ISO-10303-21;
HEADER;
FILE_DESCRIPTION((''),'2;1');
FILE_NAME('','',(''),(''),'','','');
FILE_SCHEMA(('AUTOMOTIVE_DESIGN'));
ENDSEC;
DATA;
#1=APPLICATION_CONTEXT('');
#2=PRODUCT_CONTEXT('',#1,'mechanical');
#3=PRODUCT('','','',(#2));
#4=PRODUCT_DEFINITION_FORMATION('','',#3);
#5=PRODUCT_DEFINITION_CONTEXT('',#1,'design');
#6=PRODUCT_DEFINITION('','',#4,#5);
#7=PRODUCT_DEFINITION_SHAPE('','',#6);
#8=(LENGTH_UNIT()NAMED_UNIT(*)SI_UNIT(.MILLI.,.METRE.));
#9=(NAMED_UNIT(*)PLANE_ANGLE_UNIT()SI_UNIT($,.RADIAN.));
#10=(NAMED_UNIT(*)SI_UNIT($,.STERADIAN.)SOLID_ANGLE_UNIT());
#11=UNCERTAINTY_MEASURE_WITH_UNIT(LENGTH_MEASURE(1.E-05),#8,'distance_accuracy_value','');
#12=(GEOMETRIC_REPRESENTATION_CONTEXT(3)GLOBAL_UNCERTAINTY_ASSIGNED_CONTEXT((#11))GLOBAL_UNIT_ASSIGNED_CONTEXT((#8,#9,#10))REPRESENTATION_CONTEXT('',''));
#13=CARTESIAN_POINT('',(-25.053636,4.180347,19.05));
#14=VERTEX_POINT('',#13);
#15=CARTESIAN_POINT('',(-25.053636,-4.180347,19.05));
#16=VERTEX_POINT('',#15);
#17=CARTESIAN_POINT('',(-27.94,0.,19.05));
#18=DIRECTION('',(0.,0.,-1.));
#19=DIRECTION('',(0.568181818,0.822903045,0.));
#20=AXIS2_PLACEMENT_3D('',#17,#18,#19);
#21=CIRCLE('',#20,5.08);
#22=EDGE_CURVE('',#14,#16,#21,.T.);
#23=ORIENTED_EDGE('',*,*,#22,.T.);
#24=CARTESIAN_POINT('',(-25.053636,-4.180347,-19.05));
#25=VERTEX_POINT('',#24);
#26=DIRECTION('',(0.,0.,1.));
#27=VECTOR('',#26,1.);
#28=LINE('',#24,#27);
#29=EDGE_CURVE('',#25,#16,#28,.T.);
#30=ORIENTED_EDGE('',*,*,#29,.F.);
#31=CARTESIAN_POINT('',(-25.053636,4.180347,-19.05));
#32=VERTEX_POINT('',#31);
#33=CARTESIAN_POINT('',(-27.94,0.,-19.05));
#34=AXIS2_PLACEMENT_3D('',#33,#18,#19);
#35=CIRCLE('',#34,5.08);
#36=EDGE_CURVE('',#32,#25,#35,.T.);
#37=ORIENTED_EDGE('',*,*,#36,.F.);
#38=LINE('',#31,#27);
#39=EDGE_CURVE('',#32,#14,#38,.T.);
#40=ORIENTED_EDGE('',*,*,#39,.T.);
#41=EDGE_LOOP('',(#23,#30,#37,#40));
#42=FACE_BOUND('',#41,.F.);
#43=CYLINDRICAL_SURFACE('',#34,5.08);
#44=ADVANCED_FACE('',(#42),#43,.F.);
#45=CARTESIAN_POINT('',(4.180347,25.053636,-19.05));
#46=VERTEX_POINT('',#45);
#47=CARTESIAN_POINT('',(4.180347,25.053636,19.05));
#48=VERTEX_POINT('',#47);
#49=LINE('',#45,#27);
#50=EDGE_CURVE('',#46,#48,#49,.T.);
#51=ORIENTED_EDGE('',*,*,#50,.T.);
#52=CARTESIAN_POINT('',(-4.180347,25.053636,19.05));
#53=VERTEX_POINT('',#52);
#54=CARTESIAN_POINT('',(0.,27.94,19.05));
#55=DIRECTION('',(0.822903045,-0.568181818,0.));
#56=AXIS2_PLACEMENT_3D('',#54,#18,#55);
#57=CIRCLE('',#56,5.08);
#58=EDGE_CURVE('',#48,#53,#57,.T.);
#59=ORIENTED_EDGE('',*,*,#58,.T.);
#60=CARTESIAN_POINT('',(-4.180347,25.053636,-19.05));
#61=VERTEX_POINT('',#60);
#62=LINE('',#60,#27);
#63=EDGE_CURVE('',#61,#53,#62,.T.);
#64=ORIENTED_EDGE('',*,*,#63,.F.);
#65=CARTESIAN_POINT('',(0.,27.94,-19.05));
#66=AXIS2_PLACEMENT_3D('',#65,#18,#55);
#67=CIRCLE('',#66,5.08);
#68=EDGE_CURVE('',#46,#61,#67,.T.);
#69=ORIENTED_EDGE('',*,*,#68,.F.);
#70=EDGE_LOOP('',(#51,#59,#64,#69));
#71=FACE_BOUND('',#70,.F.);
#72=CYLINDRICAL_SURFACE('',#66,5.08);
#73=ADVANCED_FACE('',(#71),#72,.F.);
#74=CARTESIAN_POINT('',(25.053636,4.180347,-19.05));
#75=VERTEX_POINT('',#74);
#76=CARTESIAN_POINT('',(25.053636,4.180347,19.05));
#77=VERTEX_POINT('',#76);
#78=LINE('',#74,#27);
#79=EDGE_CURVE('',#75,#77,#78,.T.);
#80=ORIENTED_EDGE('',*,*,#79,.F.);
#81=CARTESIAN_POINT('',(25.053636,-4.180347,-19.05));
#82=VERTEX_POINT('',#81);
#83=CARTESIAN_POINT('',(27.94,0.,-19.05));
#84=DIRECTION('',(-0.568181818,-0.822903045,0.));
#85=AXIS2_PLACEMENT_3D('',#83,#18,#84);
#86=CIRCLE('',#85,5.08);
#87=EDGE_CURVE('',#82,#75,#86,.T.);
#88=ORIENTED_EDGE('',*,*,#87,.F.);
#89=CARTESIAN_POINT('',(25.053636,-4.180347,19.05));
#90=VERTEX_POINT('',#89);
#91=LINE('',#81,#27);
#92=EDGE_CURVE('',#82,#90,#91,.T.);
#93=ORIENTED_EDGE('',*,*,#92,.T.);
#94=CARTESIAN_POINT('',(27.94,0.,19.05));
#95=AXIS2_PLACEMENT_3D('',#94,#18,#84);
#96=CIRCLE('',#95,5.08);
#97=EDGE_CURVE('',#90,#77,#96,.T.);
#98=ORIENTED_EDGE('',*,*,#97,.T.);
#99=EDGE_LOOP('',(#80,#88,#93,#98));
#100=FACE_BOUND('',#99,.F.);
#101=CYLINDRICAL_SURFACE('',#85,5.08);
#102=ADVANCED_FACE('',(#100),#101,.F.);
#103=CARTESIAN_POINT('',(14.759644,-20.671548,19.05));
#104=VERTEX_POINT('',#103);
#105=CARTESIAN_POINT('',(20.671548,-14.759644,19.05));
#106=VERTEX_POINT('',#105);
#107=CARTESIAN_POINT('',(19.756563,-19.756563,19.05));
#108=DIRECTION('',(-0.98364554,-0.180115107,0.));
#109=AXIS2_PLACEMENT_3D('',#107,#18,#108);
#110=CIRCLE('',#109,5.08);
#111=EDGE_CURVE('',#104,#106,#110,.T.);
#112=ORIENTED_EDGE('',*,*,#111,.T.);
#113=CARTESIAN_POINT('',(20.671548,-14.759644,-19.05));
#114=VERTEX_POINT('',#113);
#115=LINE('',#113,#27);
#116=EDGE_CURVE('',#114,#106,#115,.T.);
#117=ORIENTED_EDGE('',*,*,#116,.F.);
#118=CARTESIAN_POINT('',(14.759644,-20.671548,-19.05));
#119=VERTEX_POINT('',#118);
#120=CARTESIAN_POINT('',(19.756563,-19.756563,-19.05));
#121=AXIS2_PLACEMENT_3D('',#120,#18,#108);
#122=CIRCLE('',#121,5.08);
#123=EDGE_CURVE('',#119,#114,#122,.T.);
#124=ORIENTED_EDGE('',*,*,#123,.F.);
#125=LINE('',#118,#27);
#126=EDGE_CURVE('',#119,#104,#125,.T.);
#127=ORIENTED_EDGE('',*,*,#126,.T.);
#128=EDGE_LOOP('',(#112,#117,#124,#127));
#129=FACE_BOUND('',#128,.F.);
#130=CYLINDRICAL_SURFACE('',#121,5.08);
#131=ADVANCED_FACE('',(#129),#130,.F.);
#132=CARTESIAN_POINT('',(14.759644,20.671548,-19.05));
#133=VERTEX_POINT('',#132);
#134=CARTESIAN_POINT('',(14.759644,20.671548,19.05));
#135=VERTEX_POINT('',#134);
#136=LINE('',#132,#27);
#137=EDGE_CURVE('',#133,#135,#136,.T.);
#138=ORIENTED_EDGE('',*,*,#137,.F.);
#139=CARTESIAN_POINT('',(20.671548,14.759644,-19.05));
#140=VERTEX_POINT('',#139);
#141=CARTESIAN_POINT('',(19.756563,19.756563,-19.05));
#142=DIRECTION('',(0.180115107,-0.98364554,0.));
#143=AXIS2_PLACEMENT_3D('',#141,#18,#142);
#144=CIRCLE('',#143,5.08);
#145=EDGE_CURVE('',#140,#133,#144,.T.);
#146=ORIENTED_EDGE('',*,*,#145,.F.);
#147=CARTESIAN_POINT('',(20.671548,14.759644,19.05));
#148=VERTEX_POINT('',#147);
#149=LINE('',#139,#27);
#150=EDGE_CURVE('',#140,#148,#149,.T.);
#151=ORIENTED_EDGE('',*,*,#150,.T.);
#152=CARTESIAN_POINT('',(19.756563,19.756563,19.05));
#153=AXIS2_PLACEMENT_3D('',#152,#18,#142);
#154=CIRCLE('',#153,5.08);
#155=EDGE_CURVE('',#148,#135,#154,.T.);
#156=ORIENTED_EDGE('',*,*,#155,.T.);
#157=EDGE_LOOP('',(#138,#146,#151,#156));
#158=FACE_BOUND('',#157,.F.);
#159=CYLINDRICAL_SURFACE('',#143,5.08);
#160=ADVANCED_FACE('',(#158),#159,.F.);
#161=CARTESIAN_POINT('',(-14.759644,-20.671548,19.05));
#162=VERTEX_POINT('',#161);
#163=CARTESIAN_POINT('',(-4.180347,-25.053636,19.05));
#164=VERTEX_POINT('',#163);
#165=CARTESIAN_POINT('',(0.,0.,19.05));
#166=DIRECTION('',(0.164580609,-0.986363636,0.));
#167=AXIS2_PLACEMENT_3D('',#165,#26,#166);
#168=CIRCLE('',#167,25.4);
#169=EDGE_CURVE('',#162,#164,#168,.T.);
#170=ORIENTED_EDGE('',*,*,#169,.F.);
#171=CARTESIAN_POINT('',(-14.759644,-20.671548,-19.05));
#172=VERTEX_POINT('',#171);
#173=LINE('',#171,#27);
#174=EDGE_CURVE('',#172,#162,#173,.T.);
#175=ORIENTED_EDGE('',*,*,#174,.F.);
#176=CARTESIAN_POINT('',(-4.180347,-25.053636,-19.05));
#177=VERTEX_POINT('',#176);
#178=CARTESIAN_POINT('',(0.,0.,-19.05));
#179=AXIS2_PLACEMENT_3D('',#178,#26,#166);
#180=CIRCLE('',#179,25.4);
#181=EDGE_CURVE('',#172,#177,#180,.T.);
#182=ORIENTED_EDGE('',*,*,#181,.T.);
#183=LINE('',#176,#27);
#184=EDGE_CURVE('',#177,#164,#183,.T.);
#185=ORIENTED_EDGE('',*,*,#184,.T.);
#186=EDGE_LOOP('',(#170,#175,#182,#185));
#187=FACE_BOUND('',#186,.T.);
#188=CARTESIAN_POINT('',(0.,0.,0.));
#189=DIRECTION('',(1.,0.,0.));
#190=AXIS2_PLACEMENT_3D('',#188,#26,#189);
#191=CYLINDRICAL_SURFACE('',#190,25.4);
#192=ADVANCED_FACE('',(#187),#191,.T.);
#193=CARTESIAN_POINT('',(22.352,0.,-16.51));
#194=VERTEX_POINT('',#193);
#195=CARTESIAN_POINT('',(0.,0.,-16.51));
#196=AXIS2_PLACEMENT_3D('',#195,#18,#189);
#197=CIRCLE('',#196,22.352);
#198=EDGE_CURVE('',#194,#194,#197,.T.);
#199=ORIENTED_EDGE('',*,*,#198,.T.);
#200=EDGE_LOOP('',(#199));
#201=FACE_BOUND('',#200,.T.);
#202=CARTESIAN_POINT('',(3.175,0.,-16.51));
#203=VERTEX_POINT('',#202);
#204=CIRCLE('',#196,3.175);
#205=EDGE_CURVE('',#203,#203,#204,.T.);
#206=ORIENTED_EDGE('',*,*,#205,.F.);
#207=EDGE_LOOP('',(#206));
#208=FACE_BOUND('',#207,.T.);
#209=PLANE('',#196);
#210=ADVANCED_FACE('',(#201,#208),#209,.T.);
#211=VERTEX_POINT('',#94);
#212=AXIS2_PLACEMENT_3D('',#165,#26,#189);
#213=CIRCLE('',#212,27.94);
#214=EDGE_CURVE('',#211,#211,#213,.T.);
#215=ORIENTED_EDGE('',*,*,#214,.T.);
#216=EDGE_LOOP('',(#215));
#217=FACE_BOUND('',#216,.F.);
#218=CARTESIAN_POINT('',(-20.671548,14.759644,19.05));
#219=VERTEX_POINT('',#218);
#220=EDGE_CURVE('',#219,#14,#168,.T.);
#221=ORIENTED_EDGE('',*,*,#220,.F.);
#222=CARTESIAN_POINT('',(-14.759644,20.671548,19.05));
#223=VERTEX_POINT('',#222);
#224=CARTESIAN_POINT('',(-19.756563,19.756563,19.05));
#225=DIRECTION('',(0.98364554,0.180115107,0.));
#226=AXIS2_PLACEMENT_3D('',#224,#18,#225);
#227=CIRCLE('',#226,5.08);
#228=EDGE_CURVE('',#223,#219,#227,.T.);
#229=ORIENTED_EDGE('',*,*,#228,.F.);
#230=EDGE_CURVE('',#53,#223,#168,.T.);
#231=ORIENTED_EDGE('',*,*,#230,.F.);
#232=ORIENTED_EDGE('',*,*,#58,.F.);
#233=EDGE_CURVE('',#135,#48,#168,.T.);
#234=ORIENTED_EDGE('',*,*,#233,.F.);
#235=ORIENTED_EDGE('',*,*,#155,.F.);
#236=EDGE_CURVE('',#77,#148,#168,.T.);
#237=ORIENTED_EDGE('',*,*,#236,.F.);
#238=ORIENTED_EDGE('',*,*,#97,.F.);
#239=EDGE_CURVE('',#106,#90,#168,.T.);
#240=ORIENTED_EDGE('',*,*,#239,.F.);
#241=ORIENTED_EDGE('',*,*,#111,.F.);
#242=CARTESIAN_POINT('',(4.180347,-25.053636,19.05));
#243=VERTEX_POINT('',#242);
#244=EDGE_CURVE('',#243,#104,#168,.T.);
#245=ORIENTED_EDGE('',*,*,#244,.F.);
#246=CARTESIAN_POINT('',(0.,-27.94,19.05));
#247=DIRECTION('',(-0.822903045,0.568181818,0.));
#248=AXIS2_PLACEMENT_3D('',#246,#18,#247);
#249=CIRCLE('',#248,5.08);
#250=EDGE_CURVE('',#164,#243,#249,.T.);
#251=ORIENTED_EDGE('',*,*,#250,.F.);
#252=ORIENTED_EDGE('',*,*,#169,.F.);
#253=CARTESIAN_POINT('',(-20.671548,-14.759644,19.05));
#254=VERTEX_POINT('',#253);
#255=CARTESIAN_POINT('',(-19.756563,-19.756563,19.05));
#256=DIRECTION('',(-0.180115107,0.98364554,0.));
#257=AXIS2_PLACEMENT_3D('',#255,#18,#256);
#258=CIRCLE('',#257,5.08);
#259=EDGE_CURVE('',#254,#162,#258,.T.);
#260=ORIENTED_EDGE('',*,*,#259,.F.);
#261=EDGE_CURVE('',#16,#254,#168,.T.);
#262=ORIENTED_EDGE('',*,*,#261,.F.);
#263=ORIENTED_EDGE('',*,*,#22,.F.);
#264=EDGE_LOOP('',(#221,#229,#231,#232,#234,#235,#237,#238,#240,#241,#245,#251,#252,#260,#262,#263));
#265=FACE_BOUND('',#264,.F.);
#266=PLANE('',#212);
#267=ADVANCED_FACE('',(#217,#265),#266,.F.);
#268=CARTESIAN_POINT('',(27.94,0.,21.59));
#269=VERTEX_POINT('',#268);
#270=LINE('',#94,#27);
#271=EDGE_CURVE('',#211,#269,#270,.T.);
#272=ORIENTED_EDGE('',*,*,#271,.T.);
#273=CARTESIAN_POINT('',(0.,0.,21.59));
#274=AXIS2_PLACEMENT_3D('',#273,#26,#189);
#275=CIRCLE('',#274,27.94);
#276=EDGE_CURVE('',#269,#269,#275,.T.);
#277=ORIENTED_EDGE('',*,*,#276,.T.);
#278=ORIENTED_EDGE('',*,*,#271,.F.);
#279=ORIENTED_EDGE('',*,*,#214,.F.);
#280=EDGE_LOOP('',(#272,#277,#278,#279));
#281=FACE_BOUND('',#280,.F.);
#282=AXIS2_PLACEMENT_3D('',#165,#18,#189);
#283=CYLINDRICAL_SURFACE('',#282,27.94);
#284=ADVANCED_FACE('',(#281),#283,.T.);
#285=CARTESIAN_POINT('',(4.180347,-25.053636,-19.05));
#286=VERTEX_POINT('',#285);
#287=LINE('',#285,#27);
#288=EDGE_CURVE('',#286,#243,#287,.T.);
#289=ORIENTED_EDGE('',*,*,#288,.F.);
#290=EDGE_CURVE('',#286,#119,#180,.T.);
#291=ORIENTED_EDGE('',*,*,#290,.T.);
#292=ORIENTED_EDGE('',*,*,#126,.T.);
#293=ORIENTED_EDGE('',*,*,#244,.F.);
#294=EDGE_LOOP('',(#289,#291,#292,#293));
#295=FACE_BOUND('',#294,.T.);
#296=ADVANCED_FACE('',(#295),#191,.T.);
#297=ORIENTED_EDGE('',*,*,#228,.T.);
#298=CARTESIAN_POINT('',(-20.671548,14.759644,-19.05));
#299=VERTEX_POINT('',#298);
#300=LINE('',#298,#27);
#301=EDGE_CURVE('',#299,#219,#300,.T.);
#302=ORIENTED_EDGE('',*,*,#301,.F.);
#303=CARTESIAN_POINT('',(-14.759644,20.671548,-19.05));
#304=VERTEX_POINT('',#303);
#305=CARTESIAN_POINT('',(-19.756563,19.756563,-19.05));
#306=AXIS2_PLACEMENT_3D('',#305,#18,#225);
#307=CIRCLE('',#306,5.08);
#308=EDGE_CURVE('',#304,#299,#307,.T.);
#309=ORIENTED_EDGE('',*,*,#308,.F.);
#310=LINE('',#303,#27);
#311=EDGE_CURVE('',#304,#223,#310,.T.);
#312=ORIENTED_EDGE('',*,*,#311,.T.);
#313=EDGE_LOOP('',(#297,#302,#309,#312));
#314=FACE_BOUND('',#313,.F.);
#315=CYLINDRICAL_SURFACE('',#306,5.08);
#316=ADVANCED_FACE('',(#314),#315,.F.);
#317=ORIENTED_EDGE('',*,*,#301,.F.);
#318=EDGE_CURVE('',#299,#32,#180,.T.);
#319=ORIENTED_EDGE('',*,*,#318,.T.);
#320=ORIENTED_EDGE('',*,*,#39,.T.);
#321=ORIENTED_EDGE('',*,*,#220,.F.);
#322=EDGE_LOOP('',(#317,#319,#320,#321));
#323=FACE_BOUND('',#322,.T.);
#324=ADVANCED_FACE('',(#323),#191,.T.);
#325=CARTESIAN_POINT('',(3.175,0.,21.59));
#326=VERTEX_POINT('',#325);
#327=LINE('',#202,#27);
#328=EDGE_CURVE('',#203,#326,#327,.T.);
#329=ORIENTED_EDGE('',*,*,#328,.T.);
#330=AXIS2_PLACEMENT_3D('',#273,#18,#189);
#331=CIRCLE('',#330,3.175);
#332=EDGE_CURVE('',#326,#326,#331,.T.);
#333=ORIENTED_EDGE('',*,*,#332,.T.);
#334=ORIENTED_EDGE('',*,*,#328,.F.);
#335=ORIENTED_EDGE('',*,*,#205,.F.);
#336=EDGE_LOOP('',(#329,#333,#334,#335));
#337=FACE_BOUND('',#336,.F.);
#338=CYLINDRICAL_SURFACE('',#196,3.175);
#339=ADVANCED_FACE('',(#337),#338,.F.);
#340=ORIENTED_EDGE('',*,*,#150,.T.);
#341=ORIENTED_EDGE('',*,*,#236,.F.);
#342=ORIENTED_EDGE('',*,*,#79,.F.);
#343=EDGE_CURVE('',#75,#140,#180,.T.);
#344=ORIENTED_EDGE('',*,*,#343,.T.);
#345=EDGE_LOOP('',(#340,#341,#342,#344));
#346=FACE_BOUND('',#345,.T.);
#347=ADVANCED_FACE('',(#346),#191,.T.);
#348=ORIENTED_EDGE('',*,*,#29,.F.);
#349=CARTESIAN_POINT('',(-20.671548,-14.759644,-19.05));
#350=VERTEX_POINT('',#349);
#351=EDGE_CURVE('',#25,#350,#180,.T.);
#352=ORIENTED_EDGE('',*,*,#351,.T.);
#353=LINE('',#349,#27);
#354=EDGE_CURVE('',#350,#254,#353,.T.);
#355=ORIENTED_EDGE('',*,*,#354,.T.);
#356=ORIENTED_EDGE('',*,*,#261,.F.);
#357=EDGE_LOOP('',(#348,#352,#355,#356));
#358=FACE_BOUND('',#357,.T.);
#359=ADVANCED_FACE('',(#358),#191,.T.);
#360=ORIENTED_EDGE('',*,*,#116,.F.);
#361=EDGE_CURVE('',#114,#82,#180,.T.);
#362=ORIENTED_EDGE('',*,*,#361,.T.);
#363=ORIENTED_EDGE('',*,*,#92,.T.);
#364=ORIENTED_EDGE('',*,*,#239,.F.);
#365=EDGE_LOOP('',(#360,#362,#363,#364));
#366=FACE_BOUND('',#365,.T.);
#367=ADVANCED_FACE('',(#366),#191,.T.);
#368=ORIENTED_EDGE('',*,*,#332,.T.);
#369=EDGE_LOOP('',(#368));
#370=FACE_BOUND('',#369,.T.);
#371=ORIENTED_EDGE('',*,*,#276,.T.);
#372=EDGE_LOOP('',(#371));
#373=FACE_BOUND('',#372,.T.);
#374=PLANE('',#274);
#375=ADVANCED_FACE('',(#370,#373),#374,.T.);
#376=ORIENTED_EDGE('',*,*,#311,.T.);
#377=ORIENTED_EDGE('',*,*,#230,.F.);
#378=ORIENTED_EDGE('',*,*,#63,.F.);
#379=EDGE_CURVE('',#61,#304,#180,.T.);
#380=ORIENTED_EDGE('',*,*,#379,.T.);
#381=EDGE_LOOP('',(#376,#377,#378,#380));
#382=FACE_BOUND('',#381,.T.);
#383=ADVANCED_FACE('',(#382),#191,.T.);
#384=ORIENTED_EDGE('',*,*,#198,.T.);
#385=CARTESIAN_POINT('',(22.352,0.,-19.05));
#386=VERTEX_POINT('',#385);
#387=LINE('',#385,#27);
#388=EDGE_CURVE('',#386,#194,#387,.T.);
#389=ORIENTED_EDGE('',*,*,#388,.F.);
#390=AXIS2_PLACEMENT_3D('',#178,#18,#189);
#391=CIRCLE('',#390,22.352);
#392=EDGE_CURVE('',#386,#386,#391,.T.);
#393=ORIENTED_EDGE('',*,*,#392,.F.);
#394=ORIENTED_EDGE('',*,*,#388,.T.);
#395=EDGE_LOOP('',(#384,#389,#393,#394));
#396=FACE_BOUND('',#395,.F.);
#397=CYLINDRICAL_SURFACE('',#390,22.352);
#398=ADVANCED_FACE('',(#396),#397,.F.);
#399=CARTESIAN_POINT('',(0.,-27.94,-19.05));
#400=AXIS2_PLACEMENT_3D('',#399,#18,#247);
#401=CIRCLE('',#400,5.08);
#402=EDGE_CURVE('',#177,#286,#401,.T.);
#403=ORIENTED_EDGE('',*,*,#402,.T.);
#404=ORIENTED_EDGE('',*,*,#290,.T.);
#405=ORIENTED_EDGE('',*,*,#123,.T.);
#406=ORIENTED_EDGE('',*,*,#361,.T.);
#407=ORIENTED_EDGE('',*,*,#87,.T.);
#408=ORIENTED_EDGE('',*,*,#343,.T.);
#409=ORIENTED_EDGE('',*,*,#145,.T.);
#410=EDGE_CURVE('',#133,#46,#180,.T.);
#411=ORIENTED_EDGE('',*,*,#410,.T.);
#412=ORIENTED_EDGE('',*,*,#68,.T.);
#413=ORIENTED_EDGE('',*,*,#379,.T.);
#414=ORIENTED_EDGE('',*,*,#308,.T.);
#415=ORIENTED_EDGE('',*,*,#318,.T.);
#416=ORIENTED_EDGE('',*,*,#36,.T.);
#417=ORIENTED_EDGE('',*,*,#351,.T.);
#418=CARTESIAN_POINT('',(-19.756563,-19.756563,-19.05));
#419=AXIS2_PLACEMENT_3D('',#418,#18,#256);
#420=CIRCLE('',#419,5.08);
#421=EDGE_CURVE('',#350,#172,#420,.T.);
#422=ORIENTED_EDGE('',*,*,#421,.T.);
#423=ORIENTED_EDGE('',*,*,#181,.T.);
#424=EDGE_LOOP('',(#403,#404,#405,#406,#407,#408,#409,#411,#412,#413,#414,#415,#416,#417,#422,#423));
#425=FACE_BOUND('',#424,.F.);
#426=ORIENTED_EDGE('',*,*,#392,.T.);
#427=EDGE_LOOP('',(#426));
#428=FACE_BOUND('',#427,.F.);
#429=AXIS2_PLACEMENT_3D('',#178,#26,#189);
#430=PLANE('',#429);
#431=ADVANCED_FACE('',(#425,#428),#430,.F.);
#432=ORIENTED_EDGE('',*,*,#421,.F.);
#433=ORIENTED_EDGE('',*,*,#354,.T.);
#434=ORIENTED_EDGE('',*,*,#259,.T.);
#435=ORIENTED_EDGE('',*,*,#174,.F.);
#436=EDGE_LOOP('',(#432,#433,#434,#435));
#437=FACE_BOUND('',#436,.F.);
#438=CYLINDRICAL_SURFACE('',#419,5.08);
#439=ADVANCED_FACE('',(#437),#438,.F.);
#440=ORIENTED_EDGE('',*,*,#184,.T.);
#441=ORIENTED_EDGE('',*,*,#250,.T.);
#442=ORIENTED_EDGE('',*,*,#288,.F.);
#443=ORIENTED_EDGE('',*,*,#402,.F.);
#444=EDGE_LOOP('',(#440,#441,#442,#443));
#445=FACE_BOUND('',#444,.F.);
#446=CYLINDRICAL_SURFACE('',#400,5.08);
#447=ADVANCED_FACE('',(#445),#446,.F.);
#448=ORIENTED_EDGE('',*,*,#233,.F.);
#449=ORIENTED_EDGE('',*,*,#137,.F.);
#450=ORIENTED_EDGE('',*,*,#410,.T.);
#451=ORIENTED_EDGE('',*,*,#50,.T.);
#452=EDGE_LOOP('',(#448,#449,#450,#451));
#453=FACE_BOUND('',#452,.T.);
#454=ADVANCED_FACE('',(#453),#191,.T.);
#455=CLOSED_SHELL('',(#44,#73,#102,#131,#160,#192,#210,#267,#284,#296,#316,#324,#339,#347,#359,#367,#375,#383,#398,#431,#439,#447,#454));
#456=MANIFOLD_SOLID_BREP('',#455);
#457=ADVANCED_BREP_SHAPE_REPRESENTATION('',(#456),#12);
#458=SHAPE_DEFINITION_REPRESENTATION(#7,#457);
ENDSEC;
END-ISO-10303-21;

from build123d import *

# Parameters (mm, degrees)
F0_R            = 25.4
F1_DEPTH        = 19.05
F2_R            = 27.94
F2_R_2          = 25.4
F3_DEPTH        = 2.54
F4_R            = 22.352
F5_DEPTH        = 2.54
F6_R            = 3.175
F7_DEPTH        = 38.101
F9_DEPTH        = 38.1
F9_COPIES_COUNT = 8


# Not quite as in the source:
# - a pattern or mirror of a feature is missing from the dataset's text; its kind, count and spacing are read off the source's solid


with BuildPart() as f1:
    # F0 (on Top) → F1 (new body, symmetric)
    with BuildSketch(Plane.XY):
        Circle(F0_R)
    extrude(amount=F1_DEPTH, both=True)

    # F2 (on face) → F3 (join)
    with BuildSketch(Plane.XY.offset(19.05)):
        Circle(F2_R)
        Circle(F2_R_2, mode=Mode.SUBTRACT)
        Circle(F2_R_2)
    extrude(amount=F3_DEPTH)

    # F4 (on face) → F5 (cut)
    with BuildSketch(Plane(origin=(0, 0, -19.05), x_dir=(1, 0, 0), z_dir=(0, 0, -1))):
        Circle(F4_R)
    extrude(amount=-F5_DEPTH, mode=Mode.SUBTRACT)

    # F6 (on face) → F7 (cut, through all)
    with BuildSketch(Plane(origin=(0, 0, -16.51), x_dir=(1, 0, 0), z_dir=(0, 0, -1))):
        Circle(F6_R)
    extrude(amount=-F7_DEPTH, mode=Mode.SUBTRACT)

    # F8 (on face) → F9 (cut, through all)
    with BuildSketch(Plane(origin=(0, 0, -19.05), x_dir=(1, 0, 0), z_dir=(0, 0, -1))):
        with BuildLine():
            ThreePointArc((4.1803474687, 25.0536363636), (0, 25.4), (-4.1803474687, 25.0536363636))
            ThreePointArc((-4.1803474687, 25.0536363636), (0, 22.86), (4.1803474687, 25.0536363636))
        make_face()
    f9 = extrude(amount=-F9_DEPTH, mode=Mode.SUBTRACT)

    # F9_copies: F9 ×8 about axis
    f9_copies_axis = Axis((0, 0, 0), (0, 0, 1))
    for i in range(1, F9_COPIES_COUNT):
        add(f9.rotate(f9_copies_axis, i * 360 / F9_COPIES_COUNT), mode=Mode.SUBTRACT)


solid = f1.part
